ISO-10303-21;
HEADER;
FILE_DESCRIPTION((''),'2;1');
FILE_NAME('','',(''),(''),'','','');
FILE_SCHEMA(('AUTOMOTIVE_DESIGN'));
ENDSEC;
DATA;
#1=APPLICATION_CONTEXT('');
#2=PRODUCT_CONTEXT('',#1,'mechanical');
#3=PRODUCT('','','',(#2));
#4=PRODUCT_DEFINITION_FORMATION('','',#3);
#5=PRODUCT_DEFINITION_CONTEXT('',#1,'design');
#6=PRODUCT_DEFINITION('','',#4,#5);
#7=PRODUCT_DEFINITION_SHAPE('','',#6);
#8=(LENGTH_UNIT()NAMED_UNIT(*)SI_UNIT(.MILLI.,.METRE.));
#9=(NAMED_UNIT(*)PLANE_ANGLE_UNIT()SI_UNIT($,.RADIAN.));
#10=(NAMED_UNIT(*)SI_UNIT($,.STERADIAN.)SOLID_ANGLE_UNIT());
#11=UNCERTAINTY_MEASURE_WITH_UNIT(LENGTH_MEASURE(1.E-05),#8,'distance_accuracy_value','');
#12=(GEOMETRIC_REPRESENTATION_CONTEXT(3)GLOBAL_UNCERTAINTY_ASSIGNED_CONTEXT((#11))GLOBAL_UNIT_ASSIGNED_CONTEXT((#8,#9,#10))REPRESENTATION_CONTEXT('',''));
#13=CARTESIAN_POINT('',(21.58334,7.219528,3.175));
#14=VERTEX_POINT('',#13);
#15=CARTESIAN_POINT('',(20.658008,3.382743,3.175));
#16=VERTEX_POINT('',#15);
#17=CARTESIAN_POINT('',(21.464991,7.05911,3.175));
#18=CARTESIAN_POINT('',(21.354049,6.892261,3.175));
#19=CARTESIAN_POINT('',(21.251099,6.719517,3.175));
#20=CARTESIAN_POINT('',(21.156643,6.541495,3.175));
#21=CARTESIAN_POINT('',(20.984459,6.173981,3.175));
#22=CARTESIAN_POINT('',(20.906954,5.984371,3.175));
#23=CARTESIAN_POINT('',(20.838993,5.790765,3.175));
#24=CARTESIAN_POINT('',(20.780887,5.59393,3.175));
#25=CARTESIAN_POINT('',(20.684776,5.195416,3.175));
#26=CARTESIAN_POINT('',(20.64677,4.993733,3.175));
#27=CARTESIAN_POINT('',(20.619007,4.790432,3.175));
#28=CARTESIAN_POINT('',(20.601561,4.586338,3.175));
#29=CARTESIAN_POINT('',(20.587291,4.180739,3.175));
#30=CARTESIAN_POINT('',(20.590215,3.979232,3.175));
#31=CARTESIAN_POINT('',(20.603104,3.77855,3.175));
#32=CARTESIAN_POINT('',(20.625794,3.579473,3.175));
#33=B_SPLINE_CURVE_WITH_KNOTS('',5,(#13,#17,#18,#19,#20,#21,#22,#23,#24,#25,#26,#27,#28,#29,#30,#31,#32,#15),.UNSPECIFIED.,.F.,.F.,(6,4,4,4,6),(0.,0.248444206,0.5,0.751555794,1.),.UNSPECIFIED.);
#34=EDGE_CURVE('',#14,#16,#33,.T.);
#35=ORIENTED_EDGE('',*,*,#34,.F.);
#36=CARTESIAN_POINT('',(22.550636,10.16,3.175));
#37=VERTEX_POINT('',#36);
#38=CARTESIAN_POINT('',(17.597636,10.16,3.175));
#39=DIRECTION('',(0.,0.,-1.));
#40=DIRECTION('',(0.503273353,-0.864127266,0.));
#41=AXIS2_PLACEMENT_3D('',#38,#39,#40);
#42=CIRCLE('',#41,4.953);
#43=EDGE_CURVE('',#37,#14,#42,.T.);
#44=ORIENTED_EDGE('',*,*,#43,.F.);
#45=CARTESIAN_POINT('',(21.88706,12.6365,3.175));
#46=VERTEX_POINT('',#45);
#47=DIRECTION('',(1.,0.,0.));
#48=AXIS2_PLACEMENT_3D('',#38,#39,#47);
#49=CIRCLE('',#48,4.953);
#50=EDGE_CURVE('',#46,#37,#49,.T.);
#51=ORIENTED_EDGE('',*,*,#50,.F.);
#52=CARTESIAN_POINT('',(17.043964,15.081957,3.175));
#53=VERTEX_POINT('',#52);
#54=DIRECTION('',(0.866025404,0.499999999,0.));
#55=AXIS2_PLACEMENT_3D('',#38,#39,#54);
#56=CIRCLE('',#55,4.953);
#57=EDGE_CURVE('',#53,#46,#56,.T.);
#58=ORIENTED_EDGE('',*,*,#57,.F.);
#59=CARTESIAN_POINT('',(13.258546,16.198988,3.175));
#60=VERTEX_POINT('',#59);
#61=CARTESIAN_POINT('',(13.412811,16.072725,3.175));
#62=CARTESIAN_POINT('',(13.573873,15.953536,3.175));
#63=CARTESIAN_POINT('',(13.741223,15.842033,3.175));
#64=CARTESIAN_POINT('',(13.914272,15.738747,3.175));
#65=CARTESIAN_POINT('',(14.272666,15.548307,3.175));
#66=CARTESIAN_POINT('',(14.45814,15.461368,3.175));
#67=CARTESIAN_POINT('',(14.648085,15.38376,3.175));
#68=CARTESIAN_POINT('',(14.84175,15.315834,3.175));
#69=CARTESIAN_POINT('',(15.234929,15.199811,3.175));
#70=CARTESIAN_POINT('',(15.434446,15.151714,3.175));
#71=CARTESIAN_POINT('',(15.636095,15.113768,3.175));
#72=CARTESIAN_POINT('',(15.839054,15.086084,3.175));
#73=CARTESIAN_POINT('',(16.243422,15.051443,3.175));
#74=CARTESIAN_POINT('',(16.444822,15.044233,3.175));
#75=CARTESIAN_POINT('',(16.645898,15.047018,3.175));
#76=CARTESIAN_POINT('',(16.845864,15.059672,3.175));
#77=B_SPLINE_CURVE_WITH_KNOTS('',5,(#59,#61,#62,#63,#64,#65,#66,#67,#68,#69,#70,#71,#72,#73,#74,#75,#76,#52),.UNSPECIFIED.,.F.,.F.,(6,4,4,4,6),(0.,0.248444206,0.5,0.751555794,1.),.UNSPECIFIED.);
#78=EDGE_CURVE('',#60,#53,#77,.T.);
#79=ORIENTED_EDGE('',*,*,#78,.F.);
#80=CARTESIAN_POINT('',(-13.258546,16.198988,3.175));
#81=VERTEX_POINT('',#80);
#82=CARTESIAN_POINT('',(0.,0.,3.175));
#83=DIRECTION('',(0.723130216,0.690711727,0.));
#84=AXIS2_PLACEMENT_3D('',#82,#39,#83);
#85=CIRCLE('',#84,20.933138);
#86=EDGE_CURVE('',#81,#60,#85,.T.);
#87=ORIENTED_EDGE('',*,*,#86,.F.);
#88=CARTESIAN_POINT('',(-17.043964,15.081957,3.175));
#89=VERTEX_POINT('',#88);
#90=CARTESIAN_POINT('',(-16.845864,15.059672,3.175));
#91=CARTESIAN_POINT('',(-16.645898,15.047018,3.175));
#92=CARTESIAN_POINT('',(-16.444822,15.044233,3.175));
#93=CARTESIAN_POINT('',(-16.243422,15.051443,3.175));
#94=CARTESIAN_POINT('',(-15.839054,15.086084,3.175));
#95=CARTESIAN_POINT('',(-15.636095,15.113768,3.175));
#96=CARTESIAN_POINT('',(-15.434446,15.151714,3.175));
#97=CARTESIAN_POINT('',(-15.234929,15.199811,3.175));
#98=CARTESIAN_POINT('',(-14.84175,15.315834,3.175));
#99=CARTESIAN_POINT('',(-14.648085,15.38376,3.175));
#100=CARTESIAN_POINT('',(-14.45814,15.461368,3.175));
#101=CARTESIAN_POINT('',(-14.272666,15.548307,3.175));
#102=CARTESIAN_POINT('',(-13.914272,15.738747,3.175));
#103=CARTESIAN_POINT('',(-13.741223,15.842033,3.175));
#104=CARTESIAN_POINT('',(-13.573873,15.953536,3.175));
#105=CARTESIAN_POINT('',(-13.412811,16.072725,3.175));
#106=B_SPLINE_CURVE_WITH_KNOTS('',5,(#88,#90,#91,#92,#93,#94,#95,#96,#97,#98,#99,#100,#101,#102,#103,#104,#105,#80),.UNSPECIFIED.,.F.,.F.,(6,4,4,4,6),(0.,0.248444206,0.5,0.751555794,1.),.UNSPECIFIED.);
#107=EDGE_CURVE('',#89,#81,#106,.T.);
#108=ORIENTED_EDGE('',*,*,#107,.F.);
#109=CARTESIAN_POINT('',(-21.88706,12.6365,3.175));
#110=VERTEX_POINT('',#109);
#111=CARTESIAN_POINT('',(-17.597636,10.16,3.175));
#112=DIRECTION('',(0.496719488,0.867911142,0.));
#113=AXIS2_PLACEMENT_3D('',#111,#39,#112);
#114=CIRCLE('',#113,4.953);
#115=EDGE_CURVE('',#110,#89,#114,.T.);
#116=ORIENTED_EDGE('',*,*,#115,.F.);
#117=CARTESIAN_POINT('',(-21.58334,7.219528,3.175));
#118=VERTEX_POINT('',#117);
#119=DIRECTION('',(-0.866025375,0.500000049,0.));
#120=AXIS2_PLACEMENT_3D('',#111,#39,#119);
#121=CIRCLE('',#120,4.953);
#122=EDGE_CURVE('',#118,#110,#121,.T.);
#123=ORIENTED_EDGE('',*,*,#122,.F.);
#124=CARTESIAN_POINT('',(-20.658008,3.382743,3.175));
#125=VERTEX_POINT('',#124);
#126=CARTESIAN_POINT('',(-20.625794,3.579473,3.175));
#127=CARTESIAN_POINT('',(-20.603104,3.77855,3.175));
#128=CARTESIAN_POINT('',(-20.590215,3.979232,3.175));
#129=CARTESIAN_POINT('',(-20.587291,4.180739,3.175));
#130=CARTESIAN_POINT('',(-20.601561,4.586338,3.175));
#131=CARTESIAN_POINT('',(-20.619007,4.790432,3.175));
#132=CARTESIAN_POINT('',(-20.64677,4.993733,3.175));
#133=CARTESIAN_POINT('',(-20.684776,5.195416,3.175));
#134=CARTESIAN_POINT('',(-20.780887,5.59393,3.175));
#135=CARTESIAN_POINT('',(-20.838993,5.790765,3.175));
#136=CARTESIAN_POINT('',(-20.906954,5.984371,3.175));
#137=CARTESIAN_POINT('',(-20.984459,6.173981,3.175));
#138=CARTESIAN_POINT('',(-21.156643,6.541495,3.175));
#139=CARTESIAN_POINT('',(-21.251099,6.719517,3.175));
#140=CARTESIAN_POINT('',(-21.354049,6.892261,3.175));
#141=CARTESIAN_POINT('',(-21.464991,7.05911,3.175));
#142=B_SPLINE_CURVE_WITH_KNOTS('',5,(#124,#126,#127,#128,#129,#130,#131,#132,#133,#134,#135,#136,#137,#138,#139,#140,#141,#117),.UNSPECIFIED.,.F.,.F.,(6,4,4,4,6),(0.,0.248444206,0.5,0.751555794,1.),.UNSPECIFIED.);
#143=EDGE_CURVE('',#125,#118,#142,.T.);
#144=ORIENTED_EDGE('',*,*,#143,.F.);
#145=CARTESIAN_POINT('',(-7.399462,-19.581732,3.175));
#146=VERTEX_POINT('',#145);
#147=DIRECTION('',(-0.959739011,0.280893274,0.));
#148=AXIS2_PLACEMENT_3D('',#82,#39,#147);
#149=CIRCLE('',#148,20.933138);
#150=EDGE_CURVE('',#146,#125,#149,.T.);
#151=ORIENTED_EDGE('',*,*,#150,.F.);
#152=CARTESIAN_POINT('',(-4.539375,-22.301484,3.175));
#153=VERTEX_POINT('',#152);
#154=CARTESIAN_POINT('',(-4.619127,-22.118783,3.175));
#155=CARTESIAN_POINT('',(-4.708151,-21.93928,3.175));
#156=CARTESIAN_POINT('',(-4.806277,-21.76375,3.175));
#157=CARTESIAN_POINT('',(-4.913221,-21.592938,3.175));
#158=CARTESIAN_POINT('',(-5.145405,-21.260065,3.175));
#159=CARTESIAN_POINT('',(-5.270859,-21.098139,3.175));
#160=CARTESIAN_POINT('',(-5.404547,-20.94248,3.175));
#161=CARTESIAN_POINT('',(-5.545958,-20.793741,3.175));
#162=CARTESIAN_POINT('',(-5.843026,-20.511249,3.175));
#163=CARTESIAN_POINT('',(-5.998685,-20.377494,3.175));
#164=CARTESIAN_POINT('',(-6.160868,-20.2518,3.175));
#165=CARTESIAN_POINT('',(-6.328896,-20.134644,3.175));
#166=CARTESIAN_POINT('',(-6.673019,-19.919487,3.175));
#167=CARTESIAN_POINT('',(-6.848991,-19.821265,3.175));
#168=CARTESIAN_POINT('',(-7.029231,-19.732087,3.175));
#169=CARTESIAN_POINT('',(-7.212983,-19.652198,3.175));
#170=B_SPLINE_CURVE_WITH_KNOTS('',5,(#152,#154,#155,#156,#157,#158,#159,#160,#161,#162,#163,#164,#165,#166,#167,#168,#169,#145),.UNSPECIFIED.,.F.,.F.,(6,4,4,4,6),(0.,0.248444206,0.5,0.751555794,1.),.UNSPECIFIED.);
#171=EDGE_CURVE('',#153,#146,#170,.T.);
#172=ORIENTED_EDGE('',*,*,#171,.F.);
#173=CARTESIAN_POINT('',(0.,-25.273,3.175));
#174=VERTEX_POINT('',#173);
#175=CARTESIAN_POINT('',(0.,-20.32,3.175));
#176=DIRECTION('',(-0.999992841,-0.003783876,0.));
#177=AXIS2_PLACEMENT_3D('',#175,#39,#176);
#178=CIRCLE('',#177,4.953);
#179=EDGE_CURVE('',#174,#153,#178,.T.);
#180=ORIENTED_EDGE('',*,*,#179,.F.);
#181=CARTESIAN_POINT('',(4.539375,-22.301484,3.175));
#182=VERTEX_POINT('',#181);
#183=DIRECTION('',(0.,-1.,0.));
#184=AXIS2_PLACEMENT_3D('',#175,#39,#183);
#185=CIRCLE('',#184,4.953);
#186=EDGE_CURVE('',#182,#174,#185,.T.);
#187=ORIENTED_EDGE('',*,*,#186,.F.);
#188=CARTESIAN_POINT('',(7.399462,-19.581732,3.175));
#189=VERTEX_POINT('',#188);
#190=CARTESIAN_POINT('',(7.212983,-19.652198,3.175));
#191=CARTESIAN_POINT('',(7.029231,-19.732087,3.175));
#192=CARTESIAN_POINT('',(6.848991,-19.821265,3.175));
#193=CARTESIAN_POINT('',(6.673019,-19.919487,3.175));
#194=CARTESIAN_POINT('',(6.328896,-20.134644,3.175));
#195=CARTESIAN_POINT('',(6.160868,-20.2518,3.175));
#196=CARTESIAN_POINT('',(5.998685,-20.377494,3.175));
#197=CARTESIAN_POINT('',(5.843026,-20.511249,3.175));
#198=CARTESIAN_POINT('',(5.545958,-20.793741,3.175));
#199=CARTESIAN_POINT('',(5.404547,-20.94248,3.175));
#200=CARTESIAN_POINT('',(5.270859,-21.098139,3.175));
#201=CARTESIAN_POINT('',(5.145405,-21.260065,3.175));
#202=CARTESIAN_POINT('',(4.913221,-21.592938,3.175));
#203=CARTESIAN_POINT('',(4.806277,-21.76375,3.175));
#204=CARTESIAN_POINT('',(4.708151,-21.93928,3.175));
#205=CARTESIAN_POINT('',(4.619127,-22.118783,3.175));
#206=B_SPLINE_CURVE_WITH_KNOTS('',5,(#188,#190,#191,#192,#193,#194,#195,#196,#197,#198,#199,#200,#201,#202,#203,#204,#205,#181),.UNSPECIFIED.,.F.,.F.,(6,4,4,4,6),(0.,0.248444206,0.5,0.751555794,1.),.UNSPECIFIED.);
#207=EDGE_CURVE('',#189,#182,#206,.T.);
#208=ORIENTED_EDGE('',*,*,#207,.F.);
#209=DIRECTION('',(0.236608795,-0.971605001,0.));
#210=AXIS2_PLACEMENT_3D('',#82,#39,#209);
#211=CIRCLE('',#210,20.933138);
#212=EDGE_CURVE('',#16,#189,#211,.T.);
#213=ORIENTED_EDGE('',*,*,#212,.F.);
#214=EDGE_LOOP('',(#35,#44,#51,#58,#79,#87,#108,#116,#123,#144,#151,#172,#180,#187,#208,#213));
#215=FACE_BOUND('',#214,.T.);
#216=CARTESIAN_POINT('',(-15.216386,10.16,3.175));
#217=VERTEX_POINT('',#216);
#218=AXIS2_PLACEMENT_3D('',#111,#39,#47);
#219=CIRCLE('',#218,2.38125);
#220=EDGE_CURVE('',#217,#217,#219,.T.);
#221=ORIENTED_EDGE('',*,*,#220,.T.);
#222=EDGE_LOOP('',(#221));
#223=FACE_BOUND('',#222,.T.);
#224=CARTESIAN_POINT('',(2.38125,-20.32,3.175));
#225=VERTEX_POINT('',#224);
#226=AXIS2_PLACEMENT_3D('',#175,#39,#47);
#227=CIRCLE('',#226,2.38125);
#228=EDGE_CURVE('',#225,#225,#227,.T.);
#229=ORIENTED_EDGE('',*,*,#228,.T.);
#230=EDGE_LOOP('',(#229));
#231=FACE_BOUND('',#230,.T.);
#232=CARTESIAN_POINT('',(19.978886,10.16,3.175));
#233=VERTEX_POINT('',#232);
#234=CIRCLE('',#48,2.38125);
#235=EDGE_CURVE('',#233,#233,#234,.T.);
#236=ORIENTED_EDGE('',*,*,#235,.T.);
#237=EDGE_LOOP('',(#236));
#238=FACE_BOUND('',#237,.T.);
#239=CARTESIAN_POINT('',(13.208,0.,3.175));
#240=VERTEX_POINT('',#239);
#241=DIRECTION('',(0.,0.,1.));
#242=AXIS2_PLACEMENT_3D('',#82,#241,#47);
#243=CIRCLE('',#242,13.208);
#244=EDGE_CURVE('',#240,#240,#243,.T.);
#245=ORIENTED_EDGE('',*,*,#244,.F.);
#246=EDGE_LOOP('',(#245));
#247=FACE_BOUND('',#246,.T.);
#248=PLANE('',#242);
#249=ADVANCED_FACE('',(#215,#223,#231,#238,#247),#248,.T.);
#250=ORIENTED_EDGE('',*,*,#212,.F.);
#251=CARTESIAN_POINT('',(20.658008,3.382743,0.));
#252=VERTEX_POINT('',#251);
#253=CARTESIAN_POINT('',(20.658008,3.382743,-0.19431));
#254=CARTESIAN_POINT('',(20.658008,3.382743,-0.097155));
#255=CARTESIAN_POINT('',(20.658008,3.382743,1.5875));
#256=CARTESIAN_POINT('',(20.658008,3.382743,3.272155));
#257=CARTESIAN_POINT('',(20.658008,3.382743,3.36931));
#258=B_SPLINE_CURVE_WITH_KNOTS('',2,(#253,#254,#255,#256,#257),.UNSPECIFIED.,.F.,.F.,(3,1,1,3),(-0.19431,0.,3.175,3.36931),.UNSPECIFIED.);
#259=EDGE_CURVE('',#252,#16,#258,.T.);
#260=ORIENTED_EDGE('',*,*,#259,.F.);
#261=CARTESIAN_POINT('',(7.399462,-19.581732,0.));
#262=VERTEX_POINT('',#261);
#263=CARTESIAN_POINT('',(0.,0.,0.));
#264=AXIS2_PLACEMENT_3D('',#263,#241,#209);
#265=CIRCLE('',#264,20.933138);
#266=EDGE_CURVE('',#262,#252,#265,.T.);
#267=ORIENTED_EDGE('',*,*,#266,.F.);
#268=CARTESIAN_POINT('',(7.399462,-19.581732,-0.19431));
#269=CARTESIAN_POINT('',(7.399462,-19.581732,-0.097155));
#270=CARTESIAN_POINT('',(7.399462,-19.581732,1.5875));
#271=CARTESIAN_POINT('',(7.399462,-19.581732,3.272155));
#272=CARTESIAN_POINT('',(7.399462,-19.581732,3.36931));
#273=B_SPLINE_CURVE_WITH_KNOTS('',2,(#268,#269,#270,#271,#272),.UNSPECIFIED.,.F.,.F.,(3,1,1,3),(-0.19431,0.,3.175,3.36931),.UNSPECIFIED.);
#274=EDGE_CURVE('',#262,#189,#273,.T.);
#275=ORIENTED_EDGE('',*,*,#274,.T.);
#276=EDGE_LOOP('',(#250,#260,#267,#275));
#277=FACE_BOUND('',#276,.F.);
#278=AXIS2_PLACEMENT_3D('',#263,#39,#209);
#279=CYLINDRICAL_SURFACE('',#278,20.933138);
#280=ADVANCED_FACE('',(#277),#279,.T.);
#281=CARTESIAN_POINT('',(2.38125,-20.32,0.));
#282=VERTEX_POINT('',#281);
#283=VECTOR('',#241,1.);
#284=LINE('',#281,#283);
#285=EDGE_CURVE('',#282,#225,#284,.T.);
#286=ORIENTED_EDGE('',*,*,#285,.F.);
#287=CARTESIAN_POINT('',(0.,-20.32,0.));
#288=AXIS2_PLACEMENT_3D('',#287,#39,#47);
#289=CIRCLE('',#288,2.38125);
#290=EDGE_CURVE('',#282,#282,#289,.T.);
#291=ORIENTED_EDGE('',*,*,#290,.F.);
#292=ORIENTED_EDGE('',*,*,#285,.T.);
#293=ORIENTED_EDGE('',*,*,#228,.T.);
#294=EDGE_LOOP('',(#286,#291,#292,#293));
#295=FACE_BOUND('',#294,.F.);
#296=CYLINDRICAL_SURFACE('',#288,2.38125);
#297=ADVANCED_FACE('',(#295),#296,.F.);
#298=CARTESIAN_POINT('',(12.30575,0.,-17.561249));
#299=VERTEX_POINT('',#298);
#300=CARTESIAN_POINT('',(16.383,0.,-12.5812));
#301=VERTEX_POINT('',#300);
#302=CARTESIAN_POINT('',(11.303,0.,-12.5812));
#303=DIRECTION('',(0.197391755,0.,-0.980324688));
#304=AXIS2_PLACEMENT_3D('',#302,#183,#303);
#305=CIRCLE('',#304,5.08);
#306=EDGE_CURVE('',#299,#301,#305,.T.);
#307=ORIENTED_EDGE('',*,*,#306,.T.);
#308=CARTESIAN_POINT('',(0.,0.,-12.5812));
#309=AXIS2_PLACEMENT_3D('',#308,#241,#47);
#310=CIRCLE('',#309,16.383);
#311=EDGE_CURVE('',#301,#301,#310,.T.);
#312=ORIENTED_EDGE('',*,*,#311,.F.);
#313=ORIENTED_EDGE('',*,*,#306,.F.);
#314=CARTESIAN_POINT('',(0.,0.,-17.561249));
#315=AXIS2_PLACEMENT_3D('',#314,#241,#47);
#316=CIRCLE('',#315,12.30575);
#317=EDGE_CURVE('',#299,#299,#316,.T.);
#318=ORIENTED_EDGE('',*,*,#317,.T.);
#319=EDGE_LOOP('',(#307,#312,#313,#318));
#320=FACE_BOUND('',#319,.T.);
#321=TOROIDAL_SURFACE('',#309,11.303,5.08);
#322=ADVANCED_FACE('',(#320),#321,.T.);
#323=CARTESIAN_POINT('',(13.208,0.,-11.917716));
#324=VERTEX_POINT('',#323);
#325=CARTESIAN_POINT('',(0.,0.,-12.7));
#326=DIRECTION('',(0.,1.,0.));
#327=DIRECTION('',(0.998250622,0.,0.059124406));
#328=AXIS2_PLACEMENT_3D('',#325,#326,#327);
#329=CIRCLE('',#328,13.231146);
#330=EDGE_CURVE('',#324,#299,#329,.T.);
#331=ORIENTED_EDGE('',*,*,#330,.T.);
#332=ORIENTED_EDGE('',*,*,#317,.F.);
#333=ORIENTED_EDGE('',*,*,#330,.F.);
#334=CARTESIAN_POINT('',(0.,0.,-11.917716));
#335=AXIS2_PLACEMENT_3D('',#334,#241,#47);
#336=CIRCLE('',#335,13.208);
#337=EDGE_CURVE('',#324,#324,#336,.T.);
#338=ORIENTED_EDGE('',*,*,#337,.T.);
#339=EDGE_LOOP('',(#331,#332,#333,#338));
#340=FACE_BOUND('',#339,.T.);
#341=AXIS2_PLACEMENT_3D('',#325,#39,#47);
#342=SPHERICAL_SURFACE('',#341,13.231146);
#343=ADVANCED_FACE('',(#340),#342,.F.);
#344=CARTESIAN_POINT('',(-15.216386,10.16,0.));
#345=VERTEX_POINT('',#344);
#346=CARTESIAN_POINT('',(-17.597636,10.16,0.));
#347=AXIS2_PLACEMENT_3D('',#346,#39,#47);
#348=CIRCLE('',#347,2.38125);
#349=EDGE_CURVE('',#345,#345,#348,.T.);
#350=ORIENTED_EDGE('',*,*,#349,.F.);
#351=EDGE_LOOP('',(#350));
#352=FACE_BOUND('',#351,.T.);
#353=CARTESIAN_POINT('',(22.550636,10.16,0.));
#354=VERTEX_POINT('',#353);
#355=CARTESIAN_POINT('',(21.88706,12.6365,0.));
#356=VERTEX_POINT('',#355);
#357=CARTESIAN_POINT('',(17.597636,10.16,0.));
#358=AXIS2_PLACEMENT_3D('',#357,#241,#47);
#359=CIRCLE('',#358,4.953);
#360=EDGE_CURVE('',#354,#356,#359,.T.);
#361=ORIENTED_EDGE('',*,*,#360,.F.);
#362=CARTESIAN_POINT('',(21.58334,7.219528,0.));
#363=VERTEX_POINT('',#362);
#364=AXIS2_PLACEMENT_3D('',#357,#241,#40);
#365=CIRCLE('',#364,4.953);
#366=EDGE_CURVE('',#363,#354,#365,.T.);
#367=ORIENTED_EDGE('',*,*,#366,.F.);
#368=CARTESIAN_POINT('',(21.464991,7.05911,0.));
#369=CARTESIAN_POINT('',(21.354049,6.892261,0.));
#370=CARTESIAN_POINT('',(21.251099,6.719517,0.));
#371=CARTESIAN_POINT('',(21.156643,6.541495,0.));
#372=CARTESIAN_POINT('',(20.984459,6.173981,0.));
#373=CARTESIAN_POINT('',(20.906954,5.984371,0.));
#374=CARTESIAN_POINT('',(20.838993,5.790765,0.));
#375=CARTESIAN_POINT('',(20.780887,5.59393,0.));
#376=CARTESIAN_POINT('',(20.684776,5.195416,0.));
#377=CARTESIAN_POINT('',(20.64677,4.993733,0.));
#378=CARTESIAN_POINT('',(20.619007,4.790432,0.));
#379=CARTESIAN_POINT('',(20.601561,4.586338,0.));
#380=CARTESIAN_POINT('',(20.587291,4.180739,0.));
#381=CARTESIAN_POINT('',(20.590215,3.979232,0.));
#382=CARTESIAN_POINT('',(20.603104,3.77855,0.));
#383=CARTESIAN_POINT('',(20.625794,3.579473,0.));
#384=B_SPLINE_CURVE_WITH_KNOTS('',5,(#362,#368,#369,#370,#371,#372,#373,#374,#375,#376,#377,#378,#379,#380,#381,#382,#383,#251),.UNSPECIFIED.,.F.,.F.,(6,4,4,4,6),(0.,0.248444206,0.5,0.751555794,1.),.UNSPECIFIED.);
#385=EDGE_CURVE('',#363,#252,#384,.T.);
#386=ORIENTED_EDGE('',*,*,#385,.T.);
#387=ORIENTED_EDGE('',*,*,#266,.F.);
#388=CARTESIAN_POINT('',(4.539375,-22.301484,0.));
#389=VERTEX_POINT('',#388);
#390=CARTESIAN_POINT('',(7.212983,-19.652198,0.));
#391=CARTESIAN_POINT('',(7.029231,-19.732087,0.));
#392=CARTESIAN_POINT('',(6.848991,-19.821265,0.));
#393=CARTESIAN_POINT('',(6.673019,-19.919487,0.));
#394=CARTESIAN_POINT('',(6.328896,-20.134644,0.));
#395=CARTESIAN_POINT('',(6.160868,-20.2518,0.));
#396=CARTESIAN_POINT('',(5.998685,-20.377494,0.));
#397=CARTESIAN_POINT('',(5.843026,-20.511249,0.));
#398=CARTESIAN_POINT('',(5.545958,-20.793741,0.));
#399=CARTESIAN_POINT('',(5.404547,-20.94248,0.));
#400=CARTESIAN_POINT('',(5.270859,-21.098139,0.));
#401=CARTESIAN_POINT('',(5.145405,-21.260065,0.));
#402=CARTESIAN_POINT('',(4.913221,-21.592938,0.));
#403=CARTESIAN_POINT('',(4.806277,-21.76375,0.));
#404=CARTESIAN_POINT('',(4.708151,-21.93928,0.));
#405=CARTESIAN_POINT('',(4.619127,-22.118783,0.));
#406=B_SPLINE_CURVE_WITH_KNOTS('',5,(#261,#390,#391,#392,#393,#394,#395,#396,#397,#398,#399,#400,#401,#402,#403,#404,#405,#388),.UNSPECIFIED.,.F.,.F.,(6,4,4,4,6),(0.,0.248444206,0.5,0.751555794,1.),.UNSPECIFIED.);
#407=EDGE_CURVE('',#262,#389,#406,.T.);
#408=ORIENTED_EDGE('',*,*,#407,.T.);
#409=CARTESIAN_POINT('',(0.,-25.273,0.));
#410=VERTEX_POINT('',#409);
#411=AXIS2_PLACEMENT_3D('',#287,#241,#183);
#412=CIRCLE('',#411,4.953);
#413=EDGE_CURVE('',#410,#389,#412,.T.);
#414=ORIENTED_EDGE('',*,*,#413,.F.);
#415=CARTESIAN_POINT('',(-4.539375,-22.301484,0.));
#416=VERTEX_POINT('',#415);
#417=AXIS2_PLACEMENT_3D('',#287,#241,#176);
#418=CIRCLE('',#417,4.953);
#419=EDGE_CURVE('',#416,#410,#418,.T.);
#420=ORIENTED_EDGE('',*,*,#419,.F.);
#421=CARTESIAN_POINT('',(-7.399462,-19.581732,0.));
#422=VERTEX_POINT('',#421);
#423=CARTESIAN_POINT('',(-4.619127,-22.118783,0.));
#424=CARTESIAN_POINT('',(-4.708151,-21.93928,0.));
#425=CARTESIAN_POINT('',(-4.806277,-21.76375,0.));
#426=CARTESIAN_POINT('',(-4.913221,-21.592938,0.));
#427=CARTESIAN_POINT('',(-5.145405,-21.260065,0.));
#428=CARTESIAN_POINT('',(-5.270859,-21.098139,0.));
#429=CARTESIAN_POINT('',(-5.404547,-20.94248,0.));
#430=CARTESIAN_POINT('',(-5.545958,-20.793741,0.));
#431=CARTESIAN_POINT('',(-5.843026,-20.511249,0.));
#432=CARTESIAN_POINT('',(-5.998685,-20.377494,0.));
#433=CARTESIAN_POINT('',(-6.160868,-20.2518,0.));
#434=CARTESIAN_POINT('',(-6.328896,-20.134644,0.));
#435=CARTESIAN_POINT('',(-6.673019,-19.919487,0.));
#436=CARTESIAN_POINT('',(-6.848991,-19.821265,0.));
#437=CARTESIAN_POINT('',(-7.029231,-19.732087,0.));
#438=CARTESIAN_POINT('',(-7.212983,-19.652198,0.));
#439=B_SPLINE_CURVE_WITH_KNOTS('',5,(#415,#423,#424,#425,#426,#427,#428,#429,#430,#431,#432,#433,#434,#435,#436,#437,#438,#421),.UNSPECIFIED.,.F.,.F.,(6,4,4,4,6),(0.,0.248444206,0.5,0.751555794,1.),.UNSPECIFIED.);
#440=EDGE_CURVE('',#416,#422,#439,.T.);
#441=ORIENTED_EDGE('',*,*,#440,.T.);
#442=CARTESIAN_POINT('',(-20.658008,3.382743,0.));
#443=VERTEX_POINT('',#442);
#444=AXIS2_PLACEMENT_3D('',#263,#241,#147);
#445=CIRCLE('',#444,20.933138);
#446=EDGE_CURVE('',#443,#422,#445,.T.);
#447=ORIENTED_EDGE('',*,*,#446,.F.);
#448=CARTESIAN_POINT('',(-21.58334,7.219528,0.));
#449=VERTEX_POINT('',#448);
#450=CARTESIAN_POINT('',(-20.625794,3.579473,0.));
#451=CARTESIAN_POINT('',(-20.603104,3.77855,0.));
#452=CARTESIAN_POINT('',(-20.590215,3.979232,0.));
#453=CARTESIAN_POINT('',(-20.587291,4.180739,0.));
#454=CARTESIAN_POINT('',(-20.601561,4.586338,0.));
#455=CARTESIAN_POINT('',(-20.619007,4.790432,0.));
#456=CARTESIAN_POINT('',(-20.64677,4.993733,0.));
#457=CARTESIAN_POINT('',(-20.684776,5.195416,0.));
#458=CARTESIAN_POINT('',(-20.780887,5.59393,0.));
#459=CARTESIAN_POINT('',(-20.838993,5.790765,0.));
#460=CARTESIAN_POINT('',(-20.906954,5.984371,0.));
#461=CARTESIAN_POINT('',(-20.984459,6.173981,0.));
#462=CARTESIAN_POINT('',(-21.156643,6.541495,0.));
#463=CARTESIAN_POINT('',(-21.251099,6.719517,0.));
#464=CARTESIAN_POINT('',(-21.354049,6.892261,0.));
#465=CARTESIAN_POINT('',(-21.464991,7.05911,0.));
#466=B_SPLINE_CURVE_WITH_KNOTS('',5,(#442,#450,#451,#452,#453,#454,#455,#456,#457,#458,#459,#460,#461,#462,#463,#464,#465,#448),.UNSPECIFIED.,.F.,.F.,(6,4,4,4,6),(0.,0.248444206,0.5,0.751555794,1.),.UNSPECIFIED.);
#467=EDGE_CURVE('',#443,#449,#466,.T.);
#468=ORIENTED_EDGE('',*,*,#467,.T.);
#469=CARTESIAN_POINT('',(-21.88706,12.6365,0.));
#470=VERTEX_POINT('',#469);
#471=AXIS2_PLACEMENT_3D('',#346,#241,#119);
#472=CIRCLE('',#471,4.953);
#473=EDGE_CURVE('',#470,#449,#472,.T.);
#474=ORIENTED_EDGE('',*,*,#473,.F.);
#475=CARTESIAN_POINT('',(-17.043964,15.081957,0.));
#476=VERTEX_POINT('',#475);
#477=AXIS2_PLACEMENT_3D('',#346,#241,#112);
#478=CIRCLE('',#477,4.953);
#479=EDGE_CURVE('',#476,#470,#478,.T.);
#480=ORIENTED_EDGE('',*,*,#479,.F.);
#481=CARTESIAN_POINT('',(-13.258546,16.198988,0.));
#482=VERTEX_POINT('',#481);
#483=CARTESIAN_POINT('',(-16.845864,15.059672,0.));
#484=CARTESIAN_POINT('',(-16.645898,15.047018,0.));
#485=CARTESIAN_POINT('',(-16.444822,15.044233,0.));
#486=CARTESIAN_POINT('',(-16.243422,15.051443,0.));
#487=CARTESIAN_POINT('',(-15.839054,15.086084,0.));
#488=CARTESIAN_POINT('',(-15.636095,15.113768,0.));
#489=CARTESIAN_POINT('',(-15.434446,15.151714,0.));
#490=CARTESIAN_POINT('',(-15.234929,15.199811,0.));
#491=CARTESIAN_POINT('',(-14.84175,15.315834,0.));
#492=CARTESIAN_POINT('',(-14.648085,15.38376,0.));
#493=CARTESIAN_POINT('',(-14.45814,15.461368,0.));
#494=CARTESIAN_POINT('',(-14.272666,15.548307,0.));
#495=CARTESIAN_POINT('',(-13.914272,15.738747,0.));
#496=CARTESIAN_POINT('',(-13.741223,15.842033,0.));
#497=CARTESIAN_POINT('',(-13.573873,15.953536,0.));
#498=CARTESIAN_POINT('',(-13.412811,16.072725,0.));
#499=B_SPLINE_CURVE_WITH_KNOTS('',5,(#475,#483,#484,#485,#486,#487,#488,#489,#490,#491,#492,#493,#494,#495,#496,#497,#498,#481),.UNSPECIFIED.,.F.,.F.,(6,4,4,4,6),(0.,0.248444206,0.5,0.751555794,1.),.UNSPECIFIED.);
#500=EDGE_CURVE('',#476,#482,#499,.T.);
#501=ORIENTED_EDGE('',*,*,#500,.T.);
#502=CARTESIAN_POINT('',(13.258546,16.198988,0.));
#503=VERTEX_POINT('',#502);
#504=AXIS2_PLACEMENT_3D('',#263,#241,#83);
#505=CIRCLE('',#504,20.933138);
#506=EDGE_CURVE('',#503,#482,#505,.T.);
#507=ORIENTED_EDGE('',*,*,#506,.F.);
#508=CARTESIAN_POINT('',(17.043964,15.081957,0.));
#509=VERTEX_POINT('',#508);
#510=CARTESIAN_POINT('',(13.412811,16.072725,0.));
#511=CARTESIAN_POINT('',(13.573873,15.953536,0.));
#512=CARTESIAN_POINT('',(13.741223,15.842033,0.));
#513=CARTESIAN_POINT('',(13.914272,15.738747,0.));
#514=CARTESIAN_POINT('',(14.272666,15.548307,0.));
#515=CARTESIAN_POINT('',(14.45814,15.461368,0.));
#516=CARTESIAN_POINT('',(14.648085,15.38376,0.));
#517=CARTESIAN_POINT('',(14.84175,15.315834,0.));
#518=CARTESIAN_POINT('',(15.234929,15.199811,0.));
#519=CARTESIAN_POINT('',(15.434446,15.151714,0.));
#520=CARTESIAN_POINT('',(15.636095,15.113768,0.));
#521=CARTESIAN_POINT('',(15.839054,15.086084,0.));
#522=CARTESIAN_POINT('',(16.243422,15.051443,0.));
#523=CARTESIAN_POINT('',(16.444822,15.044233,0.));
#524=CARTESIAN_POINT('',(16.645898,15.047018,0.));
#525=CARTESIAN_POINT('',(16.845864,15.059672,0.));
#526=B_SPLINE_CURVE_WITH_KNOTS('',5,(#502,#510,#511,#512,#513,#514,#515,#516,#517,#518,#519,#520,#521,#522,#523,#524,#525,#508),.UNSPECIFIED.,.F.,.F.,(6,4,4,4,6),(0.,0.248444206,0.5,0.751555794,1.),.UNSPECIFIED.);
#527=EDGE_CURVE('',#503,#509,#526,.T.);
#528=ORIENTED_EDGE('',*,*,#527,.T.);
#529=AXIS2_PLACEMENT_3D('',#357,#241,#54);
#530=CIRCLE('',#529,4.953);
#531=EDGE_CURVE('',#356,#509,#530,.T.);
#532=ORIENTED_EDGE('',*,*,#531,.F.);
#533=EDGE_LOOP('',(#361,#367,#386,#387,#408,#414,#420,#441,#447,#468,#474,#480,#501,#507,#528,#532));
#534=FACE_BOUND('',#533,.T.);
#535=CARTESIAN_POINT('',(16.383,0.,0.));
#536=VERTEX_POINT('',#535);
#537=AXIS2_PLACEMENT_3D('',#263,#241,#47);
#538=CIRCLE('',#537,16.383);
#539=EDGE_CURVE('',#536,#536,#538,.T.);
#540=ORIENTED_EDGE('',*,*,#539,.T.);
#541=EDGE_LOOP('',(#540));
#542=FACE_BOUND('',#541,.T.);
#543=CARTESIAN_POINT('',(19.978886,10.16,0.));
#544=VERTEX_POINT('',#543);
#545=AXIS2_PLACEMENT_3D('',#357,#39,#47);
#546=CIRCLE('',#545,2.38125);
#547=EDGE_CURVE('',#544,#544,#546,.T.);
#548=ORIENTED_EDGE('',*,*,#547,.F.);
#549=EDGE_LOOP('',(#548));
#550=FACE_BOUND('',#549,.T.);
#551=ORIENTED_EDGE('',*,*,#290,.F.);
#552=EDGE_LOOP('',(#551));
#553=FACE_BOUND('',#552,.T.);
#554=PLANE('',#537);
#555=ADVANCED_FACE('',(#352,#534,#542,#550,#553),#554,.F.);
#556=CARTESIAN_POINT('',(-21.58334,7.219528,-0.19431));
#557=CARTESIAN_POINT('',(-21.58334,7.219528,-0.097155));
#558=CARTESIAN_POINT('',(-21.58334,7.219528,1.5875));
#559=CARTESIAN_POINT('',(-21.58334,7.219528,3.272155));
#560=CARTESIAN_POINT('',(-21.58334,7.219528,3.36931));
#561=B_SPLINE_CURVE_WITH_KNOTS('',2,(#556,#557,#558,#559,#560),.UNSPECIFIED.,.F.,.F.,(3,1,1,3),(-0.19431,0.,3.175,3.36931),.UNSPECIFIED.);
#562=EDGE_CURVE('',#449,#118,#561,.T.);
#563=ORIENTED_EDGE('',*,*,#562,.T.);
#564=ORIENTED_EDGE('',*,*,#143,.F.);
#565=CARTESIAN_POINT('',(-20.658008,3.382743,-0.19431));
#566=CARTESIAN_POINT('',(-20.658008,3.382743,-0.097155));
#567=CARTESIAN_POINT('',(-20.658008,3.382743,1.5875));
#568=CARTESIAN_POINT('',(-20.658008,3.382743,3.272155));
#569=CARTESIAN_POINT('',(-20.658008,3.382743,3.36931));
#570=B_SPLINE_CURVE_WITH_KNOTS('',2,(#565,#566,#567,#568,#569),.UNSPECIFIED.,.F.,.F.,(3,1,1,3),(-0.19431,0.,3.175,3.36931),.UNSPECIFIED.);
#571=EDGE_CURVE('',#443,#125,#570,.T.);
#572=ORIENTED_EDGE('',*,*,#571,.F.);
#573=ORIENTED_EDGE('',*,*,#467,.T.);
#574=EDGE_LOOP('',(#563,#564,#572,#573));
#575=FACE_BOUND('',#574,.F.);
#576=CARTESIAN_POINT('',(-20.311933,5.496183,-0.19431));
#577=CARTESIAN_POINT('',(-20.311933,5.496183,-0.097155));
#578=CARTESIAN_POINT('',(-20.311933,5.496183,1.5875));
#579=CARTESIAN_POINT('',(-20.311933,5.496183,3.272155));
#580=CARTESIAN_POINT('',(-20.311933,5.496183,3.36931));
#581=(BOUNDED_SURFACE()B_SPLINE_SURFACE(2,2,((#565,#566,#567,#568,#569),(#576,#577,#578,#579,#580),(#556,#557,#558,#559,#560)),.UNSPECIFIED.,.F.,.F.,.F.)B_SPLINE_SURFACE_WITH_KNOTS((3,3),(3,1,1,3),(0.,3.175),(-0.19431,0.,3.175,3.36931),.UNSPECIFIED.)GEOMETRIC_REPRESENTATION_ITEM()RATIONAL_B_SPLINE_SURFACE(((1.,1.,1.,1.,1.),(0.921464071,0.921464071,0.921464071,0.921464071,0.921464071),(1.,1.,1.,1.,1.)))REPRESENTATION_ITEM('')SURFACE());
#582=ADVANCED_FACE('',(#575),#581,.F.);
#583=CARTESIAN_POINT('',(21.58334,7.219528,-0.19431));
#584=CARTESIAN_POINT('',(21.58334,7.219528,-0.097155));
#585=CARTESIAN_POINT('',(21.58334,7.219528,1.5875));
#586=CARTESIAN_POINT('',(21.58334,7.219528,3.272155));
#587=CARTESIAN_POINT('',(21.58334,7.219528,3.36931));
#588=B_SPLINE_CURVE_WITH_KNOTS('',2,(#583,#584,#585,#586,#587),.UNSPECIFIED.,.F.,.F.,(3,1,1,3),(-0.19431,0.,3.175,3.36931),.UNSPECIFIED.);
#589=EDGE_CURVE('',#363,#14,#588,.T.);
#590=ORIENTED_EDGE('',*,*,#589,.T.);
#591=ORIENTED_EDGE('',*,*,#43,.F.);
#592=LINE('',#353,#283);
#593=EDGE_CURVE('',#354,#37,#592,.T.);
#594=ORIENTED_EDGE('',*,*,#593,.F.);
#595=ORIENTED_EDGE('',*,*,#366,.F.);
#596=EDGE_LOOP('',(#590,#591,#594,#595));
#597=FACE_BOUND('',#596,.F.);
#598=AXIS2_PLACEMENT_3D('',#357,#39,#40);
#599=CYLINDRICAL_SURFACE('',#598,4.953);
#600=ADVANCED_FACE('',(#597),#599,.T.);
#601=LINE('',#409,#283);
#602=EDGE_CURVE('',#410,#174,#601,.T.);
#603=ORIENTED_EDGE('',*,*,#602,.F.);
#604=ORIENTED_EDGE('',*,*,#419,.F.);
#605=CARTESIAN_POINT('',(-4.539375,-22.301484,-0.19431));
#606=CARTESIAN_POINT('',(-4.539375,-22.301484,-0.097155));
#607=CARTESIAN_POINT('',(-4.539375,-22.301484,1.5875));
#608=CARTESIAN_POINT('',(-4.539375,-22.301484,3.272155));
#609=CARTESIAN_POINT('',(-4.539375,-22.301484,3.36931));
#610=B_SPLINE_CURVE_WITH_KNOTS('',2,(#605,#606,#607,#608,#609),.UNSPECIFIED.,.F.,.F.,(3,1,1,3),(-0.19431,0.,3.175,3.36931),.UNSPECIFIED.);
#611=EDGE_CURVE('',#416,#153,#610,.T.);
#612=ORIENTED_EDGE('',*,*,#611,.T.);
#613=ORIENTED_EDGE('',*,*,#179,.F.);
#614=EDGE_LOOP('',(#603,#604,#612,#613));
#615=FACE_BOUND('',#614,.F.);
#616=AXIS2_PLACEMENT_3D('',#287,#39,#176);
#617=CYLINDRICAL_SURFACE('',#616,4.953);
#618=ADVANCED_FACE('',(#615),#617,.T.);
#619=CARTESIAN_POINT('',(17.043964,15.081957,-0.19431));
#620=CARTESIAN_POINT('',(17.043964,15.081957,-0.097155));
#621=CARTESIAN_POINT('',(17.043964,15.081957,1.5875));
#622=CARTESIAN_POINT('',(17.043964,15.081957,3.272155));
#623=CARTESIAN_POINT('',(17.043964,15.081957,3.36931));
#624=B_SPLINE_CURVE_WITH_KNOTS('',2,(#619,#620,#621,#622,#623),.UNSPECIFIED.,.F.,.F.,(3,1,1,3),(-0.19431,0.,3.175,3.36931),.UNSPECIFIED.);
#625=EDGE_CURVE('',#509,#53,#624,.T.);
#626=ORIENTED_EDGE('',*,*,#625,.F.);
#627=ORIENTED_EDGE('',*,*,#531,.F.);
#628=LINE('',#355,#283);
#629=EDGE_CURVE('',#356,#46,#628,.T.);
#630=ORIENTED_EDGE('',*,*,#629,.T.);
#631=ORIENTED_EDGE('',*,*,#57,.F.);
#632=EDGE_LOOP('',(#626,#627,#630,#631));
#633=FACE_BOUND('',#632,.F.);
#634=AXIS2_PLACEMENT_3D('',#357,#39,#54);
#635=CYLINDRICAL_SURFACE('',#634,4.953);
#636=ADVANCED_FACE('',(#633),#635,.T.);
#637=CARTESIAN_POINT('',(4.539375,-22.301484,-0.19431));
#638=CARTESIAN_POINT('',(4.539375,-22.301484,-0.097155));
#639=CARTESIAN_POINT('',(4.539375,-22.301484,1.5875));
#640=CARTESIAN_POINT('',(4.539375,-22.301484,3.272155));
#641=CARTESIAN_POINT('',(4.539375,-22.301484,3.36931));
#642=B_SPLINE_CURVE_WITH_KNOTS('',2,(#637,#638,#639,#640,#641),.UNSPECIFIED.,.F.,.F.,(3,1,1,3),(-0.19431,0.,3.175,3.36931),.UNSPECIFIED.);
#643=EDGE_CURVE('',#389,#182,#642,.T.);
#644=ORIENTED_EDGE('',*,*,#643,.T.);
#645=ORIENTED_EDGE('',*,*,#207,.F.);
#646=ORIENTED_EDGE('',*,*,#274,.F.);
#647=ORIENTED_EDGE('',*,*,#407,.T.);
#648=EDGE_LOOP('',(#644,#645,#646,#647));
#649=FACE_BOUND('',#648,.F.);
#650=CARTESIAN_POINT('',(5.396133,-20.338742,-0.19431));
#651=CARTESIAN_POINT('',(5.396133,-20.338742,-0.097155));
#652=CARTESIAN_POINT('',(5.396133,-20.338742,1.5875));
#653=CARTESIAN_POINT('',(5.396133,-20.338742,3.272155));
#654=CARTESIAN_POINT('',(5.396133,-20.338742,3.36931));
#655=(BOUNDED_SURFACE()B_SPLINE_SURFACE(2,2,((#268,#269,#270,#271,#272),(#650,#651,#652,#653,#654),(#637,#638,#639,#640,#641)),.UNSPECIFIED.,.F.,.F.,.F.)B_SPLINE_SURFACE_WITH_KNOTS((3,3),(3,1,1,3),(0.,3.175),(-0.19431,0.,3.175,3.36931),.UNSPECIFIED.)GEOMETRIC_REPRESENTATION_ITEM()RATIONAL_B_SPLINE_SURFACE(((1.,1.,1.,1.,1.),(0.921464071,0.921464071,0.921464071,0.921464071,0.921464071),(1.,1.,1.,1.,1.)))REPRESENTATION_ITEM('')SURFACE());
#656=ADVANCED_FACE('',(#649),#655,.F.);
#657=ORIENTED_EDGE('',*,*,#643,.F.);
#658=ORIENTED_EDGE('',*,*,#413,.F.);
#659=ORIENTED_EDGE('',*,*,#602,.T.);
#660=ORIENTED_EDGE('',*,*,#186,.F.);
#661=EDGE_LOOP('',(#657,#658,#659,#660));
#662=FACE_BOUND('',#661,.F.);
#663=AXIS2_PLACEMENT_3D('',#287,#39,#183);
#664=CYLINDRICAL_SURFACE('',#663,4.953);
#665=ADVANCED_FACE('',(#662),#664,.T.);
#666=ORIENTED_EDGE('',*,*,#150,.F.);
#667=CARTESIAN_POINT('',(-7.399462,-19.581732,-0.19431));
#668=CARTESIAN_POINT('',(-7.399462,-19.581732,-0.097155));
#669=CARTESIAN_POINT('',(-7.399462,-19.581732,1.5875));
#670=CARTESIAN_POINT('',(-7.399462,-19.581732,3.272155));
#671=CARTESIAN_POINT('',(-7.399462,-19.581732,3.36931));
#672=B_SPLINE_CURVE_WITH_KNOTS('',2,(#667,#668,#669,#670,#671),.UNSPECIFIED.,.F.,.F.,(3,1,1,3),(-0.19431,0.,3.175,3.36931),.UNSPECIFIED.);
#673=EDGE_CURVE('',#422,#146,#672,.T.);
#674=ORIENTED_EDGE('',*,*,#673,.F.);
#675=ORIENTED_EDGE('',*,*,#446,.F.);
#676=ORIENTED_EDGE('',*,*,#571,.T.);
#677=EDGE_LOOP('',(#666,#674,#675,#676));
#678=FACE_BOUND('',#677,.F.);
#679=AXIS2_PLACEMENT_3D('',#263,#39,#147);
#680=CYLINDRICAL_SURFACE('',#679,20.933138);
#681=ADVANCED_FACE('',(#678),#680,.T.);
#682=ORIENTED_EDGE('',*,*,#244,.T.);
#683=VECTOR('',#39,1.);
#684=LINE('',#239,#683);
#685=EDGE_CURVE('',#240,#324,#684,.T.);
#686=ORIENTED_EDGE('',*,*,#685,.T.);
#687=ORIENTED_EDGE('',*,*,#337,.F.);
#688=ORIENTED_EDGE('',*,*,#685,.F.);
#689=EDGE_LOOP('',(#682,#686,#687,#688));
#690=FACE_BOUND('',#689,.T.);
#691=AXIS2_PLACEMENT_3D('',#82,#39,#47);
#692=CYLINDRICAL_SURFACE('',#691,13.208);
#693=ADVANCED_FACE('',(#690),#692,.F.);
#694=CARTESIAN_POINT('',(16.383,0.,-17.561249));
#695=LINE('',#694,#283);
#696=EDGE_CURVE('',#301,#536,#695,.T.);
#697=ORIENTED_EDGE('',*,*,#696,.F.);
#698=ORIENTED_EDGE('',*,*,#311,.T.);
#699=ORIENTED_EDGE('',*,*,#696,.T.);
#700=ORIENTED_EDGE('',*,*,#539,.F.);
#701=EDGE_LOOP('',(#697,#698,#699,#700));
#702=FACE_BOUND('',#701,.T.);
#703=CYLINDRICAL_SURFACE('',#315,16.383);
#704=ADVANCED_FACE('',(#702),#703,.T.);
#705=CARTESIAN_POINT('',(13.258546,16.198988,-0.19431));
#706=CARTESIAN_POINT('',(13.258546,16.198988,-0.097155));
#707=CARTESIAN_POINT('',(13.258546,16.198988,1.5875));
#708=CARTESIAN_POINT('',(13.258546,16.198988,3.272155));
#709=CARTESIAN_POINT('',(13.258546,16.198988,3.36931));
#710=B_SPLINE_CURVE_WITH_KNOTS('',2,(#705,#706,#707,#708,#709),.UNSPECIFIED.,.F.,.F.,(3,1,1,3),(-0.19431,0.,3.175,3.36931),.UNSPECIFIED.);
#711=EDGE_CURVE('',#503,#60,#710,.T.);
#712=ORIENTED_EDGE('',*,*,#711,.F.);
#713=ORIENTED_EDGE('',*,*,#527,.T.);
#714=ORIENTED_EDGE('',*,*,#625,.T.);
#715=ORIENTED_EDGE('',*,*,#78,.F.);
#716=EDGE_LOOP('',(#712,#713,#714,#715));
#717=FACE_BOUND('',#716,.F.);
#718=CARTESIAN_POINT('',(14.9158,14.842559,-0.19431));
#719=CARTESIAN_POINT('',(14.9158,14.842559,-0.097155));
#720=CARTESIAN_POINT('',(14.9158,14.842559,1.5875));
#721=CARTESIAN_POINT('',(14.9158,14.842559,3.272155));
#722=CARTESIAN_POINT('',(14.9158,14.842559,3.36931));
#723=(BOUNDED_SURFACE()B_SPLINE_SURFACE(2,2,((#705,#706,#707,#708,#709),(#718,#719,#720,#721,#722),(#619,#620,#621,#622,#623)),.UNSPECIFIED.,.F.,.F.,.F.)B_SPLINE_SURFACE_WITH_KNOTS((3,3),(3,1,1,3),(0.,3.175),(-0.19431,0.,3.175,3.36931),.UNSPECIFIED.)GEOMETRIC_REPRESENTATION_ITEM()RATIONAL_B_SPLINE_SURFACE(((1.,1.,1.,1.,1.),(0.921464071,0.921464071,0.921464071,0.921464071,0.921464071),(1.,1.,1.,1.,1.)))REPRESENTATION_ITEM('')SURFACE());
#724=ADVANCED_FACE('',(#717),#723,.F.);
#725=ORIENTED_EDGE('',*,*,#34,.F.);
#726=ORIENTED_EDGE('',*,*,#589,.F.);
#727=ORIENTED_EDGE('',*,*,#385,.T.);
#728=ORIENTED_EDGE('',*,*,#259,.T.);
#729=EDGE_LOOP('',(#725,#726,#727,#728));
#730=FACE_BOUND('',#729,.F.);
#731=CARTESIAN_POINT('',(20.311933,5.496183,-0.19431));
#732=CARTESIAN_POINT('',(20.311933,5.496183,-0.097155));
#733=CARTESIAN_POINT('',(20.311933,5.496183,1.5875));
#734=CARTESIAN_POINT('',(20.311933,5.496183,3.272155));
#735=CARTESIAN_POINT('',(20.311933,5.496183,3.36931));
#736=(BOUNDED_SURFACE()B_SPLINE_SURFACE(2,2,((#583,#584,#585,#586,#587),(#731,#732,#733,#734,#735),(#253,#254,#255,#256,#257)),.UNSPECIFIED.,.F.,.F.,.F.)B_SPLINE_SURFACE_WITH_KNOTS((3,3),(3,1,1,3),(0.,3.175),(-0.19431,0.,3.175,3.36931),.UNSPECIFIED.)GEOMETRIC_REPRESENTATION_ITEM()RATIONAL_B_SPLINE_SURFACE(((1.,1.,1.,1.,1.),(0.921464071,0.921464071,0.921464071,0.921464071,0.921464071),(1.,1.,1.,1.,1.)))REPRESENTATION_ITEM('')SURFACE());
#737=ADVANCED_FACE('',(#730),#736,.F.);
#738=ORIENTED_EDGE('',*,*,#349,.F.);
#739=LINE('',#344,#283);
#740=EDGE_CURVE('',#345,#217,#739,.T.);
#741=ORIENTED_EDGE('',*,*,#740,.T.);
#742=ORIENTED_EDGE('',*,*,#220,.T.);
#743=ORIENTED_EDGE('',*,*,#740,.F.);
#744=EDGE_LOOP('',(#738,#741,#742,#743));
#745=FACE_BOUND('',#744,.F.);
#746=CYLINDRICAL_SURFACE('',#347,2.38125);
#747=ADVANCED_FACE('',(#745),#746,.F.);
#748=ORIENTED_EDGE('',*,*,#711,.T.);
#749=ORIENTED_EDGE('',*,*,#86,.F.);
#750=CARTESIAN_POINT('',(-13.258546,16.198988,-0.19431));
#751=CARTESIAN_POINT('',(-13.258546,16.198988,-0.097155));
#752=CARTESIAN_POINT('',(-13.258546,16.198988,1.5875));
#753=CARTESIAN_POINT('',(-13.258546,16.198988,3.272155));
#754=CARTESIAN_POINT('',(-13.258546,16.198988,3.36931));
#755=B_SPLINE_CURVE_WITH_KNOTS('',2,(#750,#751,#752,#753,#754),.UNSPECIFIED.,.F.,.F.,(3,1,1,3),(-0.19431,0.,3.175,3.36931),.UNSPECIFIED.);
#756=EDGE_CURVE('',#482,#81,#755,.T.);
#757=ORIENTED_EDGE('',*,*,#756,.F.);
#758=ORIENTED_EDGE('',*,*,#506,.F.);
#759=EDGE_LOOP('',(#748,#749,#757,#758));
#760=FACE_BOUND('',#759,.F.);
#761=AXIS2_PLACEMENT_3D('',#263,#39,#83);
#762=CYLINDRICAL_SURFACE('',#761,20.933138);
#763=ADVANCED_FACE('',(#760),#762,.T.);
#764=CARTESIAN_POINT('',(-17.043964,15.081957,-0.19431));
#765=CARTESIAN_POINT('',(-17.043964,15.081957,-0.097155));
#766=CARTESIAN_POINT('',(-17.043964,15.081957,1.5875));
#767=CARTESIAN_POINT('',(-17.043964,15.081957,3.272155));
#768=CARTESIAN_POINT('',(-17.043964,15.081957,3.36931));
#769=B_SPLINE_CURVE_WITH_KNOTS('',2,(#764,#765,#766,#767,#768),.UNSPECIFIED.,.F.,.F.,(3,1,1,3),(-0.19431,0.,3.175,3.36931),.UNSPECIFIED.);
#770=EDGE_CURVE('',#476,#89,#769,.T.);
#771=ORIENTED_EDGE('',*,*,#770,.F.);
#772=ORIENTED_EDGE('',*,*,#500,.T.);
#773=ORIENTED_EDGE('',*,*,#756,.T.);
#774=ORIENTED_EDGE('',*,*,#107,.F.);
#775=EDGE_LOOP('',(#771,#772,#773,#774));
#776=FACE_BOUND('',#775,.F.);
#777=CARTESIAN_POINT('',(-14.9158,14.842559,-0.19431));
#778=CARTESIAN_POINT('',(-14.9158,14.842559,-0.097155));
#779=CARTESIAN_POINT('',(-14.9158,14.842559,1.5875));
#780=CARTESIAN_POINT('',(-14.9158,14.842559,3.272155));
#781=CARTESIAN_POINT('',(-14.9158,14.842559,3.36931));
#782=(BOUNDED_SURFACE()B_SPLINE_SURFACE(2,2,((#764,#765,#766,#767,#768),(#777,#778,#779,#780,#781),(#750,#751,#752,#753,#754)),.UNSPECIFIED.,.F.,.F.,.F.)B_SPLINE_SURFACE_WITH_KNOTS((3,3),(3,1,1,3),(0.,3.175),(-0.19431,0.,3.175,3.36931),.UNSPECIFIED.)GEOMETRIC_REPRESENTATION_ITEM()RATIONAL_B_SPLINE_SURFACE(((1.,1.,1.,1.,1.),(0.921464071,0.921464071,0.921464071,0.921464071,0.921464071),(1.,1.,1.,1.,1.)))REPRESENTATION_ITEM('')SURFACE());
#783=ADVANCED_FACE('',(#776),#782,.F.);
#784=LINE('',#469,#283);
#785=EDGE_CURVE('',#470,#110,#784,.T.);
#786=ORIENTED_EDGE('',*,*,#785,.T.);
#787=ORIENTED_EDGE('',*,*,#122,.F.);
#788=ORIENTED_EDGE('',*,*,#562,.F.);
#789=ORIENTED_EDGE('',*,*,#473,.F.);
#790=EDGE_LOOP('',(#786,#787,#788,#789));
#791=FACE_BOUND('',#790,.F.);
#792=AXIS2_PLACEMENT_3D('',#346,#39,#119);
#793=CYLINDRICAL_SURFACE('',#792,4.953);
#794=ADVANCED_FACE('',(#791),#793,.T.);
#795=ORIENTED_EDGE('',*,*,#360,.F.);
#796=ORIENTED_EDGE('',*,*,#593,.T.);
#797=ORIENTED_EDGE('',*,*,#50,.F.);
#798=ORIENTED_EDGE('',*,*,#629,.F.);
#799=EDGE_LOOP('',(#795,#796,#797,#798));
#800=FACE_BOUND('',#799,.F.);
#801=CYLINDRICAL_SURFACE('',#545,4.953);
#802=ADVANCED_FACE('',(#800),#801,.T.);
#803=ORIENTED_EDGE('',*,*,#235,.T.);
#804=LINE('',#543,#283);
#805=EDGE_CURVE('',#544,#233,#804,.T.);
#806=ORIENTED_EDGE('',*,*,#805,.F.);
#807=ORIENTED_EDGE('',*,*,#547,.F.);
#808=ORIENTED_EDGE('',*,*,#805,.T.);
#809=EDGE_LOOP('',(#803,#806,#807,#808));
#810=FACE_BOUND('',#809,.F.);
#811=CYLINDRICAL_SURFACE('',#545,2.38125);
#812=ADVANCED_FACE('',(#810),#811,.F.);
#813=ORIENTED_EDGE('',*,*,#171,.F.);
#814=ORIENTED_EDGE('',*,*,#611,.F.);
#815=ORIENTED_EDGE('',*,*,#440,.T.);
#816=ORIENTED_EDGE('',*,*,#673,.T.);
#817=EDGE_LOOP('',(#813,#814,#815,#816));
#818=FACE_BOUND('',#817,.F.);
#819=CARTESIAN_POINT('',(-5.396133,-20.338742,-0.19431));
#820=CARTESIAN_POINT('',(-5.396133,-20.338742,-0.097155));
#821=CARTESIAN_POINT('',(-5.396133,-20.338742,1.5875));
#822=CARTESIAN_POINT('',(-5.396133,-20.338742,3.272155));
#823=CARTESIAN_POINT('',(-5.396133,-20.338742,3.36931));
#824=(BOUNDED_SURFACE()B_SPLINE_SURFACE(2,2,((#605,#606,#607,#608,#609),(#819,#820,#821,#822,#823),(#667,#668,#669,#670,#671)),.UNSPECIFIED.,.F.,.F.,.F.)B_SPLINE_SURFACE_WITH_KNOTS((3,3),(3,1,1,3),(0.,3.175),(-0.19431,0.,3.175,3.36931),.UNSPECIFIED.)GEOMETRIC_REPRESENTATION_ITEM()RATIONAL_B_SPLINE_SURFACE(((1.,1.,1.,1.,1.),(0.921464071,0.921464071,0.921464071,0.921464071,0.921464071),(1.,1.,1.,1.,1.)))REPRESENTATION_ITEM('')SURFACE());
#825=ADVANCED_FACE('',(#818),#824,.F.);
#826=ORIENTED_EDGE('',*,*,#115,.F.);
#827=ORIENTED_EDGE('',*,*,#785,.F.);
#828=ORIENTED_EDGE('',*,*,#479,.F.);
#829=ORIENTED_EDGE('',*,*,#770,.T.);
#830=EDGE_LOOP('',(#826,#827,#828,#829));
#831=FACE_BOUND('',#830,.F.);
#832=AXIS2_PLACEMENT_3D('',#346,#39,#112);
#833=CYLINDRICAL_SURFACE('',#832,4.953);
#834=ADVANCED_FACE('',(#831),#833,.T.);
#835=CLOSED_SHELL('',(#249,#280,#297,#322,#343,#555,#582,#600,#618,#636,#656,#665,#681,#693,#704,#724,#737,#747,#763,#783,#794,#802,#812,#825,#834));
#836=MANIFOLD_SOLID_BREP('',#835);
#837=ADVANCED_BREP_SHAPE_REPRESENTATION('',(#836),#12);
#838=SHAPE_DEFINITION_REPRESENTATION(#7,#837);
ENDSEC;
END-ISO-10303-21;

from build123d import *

# Parameters (mm, degrees)
F1_W     = 8.89
F1_H     = 3.175
F3_R     = 2.38125
F4_DEPTH = 3.176
F7_DEPTH = 3.176
F8_R     = 5.08


# Not quite as in the source:
# - a fillet or chamfer that OpenCascade refuses, or shapes differently, is made with other operations: its cross-section is extruded or revolved along the edge and cut away or added


with BuildPart() as f2:
    # F1 (on Front) → F2 (revolve)
    with BuildSketch(Plane.XZ):
        with BuildLine():
            ThreePointArc((13.208, -11.9177163316), (13.0652297207, -14.7887805254), (12.3057501177, -17.5612494052))
            Line((12.3057501177, -17.5612494052), (16.383, -17.5612494052))
            Line((16.383, -17.5612494052), (16.383, 0))
            Line((16.383, 0), (16.383, 3.175))
            Line((16.383, 3.175), (13.208, 3.175))
            Line((13.208, 3.175), (13.208, -11.9177163316))
        make_face()
        with Locations((20.828, 1.5875)):
            Rectangle(F1_W, F1_H)
    revolve(axis=Axis((0, 0, -9.4681101426), (0, 0, 1)))

    # F3 (on face) → F4 (cut, through all)
    with BuildSketch(Plane(origin=(0, 0, 0), x_dir=(1, 0, 0), z_dir=(0, 0, -1))):
        with BuildLine():
            ThreePointArc((0, 17.93875), (1.6837980227, 18.6362019773), (2.38125, 20.32))
            ThreePointArc((2.38125, 20.32), (-1.6837980227, 22.0037980227), (0, 17.93875))
        make_face()
        with Locations((-17.5976362049, -10.16)):
            Circle(F3_R)
        with Locations((17.5976362049, -10.16)):
            Circle(F3_R)
    extrude(amount=-F4_DEPTH, mode=Mode.SUBTRACT)

    # F5: fillet of radius 5.08 on 1 edges, made by hand

    # F5_s1 → F5_t2 (revolve, cut)
    with BuildSketch(Plane.XZ):
        with BuildLine():
            ThreePointArc((12.3057501177, -17.5612494052), (15.2336723724, -15.7993073042), (16.383, -12.5811999876))
            Line((16.383, -12.5811999876), (16.383, -17.5612494052))
            Line((16.383, -17.5612494052), (12.3057501177, -17.5612494052))
        make_face()
    revolve(axis=Axis((0, 0, -17.5612494052), (0, 0, 1)), mode=Mode.SUBTRACT)

    # F6 (on face) → F7 (cut, through all)
    with BuildSketch(Plane(origin=(0, 0, 0), x_dir=(1, 0, 0), z_dir=(0, 0, -1))):
        with BuildLine():
            ThreePointArc((-4.952964542, 20.3387415379), (-3.495667473, 23.8289197652), (0, 25.273))
            ThreePointArc((0, 25.273), (-21.8870601005, 12.6364998776), (-21.8870598885, -12.6365002448))
            ThreePointArc((-21.8870598885, -12.6365002448), (-22.3842836342, -8.8871231844), (-20.0903491238, -5.8799776515))
            ThreePointArc((-20.0903491238, -5.8799776515), (-18.1286292594, 10.4665689829), (-4.952964542, 20.3387415379))
        make_face()
        with BuildLine():
            ThreePointArc((0, 25.273), (3.495667473, 23.8289197652), (4.952964542, 20.3387415379))
            ThreePointArc((4.952964542, 20.3387415379), (18.1286292594, 10.4665689829), (20.0903491238, -5.8799776515))
            ThreePointArc((20.0903491238, -5.8799776515), (21.8917377458, -7.6916197707), (22.5506362049, -10.16))
            ThreePointArc((22.5506362049, -10.16), (22.3818668231, -11.4419307281), (21.8870600322, -12.6364999959))
            ThreePointArc((21.8870600322, -12.6364999959), (24.4118434084, -6.5411337246), (25.273, 0))
            ThreePointArc((25.273, 0), (17.8707096809, 17.8707096809), (0, 25.273))
        make_face()
        with BuildLine():
            ThreePointArc((-15.1373845818, -14.4587638864), (-18.8886159884, -14.9417967542), (-21.8870598885, -12.6365002448))
            ThreePointArc((-21.8870598885, -12.6365002448), (1.437e-07, -25.273), (21.8870600322, -12.6364999959))
            ThreePointArc((21.8870600322, -12.6364999959), (18.8886161272, -14.9417967167), (15.1373845818, -14.4587638864))
            ThreePointArc((15.1373845818, -14.4587638864), (0, -20.9331379659), (-15.1373845818, -14.4587638864))
        make_face()
    extrude(amount=-F7_DEPTH, mode=Mode.SUBTRACT)

    # F8
    f8_edges = [f2.edges().sort_by_distance(p)[0] for p in [
        (-15.137385, 14.458764, 1.5875),
        (15.137385, 14.458764, 1.5875),
        (20.090349, 5.879978, 1.5875),
        (4.952965, -20.338742, 1.5875),
        (-4.952965, -20.338742, 1.5875),
        (-20.090349, 5.879978, 1.5875),
    ]]
    fillet(f8_edges, radius=F8_R)


solid = f2.part
